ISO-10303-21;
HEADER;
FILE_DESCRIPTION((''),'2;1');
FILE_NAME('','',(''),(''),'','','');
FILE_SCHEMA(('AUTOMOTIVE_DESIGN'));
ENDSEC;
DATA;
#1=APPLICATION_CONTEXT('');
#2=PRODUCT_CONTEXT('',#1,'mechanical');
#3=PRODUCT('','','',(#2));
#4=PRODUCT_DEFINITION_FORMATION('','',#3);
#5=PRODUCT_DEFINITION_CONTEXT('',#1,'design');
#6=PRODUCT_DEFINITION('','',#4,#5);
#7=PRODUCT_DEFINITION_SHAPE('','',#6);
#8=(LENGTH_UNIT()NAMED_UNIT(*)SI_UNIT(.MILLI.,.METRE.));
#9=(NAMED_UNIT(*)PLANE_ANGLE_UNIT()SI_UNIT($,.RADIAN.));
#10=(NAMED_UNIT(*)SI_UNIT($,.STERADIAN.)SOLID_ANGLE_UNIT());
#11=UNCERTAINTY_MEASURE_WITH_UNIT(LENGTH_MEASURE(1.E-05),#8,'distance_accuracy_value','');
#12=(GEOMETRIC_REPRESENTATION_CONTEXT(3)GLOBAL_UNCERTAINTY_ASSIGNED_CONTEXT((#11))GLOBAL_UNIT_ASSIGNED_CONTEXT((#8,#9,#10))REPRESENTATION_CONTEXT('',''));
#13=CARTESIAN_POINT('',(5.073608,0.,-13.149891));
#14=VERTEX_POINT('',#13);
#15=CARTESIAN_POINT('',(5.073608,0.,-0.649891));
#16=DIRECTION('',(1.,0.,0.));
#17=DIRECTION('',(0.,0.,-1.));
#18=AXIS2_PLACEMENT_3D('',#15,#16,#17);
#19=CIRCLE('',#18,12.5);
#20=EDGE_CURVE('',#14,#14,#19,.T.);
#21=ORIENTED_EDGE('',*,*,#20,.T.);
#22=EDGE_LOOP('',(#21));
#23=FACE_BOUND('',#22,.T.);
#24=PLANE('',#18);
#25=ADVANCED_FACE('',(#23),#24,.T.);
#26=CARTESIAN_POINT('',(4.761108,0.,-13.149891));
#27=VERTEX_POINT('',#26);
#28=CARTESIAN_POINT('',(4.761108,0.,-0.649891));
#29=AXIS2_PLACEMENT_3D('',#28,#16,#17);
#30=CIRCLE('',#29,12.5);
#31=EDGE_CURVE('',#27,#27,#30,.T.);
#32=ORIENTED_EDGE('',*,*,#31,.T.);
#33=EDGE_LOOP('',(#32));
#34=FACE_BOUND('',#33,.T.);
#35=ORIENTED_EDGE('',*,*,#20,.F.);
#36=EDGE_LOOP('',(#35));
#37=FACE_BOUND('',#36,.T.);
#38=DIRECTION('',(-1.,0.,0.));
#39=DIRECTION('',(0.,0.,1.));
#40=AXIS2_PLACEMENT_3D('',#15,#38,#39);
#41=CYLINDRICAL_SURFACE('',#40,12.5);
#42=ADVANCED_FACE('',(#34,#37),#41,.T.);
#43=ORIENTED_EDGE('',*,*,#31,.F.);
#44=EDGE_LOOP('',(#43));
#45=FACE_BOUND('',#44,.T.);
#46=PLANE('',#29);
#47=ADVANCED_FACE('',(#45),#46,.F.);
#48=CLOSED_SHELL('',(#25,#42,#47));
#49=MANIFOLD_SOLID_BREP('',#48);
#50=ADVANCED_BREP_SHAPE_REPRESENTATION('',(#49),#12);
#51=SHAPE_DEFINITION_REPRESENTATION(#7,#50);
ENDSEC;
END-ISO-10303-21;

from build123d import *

# Parameters (mm, degrees)
SKETCH1_R             = 40
BOSS_EXTRUDE1_DEPTH   = 1
SCALE1_SCALE          = 0.5
SCALE3_SCALE          = 0.625
BODY_MOVE_COPY4_ANGLE = 30
BODY_MOVE_COPY5_ANGLE = 30


with BuildPart() as part:
    # Sketch1 → Boss-Extrude1 (new body)
    with BuildSketch(Plane(origin=(0, 0, 0), x_dir=(0, 0, -1), z_dir=(1, 0, 0))):
        Circle(SKETCH1_R)
    extrude(amount=BOSS_EXTRUDE1_DEPTH)


with BuildPart() as part_1:
    # Scale1: scaled about (0.5, 0, 0)
    add(part.part.scale(SCALE1_SCALE).moved(Location((0.25, 0, 0))))


with BuildPart() as part_2:
    # Body-Move/Copy2: moved
    add(part_1.part.moved(Location((4.171055646, 0, 0))))


with BuildPart() as part_3:
    # Scale3: scaled about (4.671055646, 0, 0)
    add(part_2.part.scale(SCALE3_SCALE).moved(Location((1.751645867, 0, 0))))


with BuildPart() as part_4:
    # Body-Move/Copy4: read off the stored shape, not the designer's step
    # Body-Move/Copy4: moved
    add(part_3.part.moved(Location((-0.8605566, 0, -3.1693539))).rotate(Axis((0, 0, 0), (0, -1, 0)), BODY_MOVE_COPY4_ANGLE))


with BuildPart() as part_5:
    # Body-Move/Copy5: read off the stored shape, not the designer's step
    # Body-Move/Copy5: moved
    add(part_4.part.moved(Location((-0.3011634, 0, 2.7353489))).rotate(Axis((0, 0, 0), (0, 1, 0)), BODY_MOVE_COPY5_ANGLE))


solid = part_5.part
